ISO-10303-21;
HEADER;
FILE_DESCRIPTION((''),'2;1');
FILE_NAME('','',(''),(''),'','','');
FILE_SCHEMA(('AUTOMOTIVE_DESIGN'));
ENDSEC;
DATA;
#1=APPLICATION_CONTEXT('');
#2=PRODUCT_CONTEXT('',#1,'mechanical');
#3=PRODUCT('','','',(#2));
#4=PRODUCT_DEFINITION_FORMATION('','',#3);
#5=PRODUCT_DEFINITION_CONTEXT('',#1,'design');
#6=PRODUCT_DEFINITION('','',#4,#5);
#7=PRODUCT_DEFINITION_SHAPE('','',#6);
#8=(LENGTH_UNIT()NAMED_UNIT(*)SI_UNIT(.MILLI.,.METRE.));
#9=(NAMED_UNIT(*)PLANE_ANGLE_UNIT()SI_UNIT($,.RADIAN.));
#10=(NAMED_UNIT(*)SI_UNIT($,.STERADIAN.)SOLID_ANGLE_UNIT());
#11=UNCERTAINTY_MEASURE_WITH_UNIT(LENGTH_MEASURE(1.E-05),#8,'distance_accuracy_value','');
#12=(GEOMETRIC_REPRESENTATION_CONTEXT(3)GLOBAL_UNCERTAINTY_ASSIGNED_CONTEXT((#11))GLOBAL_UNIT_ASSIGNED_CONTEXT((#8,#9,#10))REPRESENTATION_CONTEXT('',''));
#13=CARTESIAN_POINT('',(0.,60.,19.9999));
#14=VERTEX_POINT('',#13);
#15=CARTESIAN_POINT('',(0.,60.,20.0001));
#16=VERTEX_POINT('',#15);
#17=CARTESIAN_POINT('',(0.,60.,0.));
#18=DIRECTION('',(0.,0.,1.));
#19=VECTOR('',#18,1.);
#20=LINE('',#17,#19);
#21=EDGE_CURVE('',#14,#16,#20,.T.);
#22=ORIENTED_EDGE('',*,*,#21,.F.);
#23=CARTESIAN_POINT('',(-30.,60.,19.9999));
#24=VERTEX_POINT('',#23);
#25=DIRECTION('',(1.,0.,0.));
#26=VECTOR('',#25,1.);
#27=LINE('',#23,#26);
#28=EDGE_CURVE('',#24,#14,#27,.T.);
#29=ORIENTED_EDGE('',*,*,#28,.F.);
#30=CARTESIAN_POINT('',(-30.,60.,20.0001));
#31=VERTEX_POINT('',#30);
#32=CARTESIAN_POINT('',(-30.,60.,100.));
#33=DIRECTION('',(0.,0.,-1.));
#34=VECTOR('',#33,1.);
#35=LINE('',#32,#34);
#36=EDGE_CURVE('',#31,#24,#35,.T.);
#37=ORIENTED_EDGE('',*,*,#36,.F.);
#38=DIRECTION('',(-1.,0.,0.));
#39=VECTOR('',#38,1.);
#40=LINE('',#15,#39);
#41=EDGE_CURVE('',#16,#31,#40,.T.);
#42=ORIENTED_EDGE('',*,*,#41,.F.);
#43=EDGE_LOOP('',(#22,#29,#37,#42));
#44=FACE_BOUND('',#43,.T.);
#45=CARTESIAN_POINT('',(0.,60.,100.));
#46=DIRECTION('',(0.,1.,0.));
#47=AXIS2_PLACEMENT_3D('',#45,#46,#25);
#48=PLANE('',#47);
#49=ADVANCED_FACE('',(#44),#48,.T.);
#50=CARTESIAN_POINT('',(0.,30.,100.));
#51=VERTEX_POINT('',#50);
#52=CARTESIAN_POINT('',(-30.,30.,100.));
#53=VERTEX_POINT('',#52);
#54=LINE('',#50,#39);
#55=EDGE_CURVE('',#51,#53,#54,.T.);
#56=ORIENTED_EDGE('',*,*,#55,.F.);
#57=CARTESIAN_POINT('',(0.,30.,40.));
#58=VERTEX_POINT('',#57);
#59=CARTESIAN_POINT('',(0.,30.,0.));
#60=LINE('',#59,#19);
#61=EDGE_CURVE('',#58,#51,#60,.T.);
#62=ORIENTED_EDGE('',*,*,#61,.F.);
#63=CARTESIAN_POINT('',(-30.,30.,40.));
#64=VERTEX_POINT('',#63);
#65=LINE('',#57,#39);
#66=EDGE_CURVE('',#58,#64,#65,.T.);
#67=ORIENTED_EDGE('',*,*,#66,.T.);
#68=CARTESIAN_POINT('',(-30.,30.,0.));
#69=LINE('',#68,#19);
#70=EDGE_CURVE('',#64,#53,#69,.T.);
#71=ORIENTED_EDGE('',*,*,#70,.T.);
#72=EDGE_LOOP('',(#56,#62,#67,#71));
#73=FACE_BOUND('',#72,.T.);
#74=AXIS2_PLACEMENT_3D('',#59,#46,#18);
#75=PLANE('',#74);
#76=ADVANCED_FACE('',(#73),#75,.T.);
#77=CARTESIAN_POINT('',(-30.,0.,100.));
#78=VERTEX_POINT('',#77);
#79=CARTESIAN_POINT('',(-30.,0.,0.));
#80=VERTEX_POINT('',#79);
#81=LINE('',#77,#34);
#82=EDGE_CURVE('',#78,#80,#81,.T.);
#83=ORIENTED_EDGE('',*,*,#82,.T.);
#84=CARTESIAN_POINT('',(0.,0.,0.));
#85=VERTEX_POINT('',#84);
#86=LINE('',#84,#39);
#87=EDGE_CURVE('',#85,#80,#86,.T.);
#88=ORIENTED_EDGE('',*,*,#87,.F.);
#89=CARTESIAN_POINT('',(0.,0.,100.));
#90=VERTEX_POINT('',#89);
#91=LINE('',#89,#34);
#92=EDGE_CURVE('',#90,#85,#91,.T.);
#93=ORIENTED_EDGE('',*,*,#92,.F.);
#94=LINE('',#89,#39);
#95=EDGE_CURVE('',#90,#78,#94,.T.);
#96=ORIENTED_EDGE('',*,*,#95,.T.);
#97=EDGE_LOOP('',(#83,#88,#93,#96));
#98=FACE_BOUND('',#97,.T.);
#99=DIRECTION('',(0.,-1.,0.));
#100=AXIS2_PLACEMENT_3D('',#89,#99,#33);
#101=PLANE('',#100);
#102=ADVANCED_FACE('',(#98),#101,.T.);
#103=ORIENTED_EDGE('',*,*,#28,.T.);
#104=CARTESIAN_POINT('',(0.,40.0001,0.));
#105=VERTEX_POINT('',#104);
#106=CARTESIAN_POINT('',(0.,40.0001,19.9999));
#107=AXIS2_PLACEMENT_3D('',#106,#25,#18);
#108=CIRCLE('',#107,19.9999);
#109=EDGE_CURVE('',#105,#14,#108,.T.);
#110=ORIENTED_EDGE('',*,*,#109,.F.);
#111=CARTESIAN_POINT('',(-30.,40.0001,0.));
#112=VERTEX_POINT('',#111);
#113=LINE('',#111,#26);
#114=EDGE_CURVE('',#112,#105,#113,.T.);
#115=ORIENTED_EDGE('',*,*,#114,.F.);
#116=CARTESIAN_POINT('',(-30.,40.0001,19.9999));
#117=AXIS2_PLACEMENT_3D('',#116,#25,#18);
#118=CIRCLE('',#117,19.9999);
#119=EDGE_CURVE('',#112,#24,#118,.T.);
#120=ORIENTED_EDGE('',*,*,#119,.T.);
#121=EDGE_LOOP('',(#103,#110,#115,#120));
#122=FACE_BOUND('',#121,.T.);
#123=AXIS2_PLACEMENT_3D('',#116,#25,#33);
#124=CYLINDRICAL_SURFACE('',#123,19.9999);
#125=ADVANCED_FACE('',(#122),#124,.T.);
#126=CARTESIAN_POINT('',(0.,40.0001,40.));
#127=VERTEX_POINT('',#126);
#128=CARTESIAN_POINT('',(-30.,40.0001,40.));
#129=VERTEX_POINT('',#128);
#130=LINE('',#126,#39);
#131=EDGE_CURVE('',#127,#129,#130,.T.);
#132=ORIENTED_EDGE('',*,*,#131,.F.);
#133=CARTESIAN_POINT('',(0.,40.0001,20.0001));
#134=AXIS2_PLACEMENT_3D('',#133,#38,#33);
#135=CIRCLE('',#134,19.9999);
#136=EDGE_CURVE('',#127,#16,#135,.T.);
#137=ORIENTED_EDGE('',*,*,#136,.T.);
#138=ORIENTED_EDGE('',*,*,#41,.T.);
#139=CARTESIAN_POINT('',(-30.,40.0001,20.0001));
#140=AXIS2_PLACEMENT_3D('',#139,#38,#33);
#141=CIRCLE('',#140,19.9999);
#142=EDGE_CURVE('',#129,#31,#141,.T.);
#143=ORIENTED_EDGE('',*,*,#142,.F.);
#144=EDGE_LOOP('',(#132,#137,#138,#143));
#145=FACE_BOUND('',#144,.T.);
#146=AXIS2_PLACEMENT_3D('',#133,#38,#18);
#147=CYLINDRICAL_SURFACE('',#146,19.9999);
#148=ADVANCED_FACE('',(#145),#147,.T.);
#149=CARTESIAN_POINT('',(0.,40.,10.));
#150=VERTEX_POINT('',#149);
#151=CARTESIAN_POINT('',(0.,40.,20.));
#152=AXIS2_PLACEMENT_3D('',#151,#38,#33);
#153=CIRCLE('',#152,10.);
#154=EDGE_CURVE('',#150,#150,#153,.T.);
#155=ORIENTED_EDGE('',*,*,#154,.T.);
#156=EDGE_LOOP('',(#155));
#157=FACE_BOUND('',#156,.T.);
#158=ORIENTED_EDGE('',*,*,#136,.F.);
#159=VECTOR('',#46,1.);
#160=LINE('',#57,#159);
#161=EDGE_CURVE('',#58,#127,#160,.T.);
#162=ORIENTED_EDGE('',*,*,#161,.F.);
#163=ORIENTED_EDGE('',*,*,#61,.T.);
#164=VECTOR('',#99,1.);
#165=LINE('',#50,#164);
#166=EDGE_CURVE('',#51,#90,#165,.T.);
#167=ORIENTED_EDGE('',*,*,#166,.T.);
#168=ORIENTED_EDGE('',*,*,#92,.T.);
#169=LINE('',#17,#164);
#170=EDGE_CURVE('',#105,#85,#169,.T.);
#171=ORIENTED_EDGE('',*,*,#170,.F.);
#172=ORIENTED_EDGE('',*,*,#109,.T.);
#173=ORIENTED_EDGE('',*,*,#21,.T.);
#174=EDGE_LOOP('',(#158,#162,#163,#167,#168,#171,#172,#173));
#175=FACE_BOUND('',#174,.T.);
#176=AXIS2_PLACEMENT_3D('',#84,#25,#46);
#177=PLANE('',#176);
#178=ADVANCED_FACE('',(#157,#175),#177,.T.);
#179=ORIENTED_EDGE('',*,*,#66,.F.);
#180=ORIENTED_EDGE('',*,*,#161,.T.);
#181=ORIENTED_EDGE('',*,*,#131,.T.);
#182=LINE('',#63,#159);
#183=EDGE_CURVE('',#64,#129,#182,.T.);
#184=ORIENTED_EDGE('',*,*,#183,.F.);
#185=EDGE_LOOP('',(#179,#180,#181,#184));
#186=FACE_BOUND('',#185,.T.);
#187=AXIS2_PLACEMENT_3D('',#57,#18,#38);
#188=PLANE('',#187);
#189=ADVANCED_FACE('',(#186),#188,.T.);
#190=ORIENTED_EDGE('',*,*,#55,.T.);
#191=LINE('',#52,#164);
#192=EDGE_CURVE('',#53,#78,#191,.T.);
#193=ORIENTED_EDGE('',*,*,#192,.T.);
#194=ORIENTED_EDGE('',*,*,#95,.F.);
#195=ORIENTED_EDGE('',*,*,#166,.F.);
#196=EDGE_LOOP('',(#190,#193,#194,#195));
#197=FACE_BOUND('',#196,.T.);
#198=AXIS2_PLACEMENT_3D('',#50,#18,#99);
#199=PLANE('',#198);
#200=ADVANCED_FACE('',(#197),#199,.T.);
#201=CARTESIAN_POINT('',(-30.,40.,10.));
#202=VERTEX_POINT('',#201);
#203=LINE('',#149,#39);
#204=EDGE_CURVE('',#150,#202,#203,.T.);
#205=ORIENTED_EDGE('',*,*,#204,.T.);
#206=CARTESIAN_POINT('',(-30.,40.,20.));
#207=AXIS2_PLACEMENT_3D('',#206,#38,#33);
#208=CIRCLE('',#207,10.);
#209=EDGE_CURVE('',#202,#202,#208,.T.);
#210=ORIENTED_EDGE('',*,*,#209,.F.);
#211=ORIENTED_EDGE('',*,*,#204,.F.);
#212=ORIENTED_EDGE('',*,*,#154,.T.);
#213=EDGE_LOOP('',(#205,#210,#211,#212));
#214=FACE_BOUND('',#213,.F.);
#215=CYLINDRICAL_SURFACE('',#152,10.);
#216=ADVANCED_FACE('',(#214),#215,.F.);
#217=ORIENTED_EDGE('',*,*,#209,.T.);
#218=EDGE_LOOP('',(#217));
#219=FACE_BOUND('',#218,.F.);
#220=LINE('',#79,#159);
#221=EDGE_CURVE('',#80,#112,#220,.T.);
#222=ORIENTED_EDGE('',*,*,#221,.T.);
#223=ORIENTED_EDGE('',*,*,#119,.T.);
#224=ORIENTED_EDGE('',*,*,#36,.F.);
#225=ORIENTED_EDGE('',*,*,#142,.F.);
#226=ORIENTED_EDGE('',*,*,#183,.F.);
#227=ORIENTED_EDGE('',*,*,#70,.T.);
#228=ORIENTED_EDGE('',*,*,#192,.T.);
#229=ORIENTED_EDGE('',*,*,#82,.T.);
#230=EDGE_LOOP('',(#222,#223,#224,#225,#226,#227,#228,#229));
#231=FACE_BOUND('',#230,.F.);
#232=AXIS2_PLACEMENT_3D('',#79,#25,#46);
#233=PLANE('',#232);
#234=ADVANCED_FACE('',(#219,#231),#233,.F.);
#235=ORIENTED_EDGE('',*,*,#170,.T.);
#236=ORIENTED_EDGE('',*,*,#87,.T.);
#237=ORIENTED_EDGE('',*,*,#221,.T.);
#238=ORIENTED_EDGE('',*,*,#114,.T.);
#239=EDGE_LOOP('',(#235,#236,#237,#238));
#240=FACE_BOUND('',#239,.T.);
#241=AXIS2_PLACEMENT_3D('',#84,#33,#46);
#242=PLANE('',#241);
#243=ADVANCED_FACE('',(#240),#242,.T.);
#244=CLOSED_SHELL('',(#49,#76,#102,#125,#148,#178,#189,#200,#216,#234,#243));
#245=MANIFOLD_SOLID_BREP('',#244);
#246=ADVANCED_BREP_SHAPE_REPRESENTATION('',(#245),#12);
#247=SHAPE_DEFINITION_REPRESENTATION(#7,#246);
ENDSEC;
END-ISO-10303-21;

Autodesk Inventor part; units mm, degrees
ref_plane "YZ Plane" through (0, 0, 0) normal (1, 0, 0) x (0, 1, 0)
ref_plane "XZ Plane" through (0, 0, 0) normal (0, 1, 0) x (-1, 0, 0)
ref_plane "XY Plane" through (0, 0, 0) normal (0, 0, 1) x (1, 0, 0)
sketch "Esboço1" plane through (0, 0, 0) normal (1, 0, 0) x (0, 1, 0)
  line L0 (0, 0) -> (30, 0)
  line L1 (30, 0) -> (30, 100)
  line L2 (30, 100) -> (0, 100)
  line L3 (0, 100) -> (0, 0)
  dimension "d0" = 30
  dimension "d1" = 100
extrude "Extrusão1" add sketch "Esboço1" against normal blind 30
sketch "Esboço2" plane through (0, 0, 0) normal (1, 0, 0) x (0, 0, -1)
  point P0 (0, 0)
sketch "Esboço3" plane through (0, 30, 100) normal (0, 1, 0) x (1, 0, 0)
  line L0 (-30, 0) -> (-30, 100) projected
  line L1 (0, 100) -> (0, 0) projected
  line L2 (-30, 100) -> (0, 100)
  line L3 (0, 100) -> (0, 60)
  line L4 (0, 60) -> (-30, 60)
  line L5 (-30, 60) -> (-30, 100)
  dimension "d4" = 40
extrude "Extrusão2" add sketch "Esboço3" along normal blind 30
fillet "Arredondamento2" radius 20 2 edges at (-15, 60, 40) (-15, 60, 0)
sketch "Esboço6" plane through (0, 0, 0) normal (1, 0, 0) x (0, 0, -1)
  arc A0 (0, 40) -> (-40, 40) centre (-20, 40) ccw projected
  point P0 (0, 0)
hole "Furo3" at (0, 40, 20) direction (-1, 0, 0) diameter 20 end through all
properties part number "Suporte"
